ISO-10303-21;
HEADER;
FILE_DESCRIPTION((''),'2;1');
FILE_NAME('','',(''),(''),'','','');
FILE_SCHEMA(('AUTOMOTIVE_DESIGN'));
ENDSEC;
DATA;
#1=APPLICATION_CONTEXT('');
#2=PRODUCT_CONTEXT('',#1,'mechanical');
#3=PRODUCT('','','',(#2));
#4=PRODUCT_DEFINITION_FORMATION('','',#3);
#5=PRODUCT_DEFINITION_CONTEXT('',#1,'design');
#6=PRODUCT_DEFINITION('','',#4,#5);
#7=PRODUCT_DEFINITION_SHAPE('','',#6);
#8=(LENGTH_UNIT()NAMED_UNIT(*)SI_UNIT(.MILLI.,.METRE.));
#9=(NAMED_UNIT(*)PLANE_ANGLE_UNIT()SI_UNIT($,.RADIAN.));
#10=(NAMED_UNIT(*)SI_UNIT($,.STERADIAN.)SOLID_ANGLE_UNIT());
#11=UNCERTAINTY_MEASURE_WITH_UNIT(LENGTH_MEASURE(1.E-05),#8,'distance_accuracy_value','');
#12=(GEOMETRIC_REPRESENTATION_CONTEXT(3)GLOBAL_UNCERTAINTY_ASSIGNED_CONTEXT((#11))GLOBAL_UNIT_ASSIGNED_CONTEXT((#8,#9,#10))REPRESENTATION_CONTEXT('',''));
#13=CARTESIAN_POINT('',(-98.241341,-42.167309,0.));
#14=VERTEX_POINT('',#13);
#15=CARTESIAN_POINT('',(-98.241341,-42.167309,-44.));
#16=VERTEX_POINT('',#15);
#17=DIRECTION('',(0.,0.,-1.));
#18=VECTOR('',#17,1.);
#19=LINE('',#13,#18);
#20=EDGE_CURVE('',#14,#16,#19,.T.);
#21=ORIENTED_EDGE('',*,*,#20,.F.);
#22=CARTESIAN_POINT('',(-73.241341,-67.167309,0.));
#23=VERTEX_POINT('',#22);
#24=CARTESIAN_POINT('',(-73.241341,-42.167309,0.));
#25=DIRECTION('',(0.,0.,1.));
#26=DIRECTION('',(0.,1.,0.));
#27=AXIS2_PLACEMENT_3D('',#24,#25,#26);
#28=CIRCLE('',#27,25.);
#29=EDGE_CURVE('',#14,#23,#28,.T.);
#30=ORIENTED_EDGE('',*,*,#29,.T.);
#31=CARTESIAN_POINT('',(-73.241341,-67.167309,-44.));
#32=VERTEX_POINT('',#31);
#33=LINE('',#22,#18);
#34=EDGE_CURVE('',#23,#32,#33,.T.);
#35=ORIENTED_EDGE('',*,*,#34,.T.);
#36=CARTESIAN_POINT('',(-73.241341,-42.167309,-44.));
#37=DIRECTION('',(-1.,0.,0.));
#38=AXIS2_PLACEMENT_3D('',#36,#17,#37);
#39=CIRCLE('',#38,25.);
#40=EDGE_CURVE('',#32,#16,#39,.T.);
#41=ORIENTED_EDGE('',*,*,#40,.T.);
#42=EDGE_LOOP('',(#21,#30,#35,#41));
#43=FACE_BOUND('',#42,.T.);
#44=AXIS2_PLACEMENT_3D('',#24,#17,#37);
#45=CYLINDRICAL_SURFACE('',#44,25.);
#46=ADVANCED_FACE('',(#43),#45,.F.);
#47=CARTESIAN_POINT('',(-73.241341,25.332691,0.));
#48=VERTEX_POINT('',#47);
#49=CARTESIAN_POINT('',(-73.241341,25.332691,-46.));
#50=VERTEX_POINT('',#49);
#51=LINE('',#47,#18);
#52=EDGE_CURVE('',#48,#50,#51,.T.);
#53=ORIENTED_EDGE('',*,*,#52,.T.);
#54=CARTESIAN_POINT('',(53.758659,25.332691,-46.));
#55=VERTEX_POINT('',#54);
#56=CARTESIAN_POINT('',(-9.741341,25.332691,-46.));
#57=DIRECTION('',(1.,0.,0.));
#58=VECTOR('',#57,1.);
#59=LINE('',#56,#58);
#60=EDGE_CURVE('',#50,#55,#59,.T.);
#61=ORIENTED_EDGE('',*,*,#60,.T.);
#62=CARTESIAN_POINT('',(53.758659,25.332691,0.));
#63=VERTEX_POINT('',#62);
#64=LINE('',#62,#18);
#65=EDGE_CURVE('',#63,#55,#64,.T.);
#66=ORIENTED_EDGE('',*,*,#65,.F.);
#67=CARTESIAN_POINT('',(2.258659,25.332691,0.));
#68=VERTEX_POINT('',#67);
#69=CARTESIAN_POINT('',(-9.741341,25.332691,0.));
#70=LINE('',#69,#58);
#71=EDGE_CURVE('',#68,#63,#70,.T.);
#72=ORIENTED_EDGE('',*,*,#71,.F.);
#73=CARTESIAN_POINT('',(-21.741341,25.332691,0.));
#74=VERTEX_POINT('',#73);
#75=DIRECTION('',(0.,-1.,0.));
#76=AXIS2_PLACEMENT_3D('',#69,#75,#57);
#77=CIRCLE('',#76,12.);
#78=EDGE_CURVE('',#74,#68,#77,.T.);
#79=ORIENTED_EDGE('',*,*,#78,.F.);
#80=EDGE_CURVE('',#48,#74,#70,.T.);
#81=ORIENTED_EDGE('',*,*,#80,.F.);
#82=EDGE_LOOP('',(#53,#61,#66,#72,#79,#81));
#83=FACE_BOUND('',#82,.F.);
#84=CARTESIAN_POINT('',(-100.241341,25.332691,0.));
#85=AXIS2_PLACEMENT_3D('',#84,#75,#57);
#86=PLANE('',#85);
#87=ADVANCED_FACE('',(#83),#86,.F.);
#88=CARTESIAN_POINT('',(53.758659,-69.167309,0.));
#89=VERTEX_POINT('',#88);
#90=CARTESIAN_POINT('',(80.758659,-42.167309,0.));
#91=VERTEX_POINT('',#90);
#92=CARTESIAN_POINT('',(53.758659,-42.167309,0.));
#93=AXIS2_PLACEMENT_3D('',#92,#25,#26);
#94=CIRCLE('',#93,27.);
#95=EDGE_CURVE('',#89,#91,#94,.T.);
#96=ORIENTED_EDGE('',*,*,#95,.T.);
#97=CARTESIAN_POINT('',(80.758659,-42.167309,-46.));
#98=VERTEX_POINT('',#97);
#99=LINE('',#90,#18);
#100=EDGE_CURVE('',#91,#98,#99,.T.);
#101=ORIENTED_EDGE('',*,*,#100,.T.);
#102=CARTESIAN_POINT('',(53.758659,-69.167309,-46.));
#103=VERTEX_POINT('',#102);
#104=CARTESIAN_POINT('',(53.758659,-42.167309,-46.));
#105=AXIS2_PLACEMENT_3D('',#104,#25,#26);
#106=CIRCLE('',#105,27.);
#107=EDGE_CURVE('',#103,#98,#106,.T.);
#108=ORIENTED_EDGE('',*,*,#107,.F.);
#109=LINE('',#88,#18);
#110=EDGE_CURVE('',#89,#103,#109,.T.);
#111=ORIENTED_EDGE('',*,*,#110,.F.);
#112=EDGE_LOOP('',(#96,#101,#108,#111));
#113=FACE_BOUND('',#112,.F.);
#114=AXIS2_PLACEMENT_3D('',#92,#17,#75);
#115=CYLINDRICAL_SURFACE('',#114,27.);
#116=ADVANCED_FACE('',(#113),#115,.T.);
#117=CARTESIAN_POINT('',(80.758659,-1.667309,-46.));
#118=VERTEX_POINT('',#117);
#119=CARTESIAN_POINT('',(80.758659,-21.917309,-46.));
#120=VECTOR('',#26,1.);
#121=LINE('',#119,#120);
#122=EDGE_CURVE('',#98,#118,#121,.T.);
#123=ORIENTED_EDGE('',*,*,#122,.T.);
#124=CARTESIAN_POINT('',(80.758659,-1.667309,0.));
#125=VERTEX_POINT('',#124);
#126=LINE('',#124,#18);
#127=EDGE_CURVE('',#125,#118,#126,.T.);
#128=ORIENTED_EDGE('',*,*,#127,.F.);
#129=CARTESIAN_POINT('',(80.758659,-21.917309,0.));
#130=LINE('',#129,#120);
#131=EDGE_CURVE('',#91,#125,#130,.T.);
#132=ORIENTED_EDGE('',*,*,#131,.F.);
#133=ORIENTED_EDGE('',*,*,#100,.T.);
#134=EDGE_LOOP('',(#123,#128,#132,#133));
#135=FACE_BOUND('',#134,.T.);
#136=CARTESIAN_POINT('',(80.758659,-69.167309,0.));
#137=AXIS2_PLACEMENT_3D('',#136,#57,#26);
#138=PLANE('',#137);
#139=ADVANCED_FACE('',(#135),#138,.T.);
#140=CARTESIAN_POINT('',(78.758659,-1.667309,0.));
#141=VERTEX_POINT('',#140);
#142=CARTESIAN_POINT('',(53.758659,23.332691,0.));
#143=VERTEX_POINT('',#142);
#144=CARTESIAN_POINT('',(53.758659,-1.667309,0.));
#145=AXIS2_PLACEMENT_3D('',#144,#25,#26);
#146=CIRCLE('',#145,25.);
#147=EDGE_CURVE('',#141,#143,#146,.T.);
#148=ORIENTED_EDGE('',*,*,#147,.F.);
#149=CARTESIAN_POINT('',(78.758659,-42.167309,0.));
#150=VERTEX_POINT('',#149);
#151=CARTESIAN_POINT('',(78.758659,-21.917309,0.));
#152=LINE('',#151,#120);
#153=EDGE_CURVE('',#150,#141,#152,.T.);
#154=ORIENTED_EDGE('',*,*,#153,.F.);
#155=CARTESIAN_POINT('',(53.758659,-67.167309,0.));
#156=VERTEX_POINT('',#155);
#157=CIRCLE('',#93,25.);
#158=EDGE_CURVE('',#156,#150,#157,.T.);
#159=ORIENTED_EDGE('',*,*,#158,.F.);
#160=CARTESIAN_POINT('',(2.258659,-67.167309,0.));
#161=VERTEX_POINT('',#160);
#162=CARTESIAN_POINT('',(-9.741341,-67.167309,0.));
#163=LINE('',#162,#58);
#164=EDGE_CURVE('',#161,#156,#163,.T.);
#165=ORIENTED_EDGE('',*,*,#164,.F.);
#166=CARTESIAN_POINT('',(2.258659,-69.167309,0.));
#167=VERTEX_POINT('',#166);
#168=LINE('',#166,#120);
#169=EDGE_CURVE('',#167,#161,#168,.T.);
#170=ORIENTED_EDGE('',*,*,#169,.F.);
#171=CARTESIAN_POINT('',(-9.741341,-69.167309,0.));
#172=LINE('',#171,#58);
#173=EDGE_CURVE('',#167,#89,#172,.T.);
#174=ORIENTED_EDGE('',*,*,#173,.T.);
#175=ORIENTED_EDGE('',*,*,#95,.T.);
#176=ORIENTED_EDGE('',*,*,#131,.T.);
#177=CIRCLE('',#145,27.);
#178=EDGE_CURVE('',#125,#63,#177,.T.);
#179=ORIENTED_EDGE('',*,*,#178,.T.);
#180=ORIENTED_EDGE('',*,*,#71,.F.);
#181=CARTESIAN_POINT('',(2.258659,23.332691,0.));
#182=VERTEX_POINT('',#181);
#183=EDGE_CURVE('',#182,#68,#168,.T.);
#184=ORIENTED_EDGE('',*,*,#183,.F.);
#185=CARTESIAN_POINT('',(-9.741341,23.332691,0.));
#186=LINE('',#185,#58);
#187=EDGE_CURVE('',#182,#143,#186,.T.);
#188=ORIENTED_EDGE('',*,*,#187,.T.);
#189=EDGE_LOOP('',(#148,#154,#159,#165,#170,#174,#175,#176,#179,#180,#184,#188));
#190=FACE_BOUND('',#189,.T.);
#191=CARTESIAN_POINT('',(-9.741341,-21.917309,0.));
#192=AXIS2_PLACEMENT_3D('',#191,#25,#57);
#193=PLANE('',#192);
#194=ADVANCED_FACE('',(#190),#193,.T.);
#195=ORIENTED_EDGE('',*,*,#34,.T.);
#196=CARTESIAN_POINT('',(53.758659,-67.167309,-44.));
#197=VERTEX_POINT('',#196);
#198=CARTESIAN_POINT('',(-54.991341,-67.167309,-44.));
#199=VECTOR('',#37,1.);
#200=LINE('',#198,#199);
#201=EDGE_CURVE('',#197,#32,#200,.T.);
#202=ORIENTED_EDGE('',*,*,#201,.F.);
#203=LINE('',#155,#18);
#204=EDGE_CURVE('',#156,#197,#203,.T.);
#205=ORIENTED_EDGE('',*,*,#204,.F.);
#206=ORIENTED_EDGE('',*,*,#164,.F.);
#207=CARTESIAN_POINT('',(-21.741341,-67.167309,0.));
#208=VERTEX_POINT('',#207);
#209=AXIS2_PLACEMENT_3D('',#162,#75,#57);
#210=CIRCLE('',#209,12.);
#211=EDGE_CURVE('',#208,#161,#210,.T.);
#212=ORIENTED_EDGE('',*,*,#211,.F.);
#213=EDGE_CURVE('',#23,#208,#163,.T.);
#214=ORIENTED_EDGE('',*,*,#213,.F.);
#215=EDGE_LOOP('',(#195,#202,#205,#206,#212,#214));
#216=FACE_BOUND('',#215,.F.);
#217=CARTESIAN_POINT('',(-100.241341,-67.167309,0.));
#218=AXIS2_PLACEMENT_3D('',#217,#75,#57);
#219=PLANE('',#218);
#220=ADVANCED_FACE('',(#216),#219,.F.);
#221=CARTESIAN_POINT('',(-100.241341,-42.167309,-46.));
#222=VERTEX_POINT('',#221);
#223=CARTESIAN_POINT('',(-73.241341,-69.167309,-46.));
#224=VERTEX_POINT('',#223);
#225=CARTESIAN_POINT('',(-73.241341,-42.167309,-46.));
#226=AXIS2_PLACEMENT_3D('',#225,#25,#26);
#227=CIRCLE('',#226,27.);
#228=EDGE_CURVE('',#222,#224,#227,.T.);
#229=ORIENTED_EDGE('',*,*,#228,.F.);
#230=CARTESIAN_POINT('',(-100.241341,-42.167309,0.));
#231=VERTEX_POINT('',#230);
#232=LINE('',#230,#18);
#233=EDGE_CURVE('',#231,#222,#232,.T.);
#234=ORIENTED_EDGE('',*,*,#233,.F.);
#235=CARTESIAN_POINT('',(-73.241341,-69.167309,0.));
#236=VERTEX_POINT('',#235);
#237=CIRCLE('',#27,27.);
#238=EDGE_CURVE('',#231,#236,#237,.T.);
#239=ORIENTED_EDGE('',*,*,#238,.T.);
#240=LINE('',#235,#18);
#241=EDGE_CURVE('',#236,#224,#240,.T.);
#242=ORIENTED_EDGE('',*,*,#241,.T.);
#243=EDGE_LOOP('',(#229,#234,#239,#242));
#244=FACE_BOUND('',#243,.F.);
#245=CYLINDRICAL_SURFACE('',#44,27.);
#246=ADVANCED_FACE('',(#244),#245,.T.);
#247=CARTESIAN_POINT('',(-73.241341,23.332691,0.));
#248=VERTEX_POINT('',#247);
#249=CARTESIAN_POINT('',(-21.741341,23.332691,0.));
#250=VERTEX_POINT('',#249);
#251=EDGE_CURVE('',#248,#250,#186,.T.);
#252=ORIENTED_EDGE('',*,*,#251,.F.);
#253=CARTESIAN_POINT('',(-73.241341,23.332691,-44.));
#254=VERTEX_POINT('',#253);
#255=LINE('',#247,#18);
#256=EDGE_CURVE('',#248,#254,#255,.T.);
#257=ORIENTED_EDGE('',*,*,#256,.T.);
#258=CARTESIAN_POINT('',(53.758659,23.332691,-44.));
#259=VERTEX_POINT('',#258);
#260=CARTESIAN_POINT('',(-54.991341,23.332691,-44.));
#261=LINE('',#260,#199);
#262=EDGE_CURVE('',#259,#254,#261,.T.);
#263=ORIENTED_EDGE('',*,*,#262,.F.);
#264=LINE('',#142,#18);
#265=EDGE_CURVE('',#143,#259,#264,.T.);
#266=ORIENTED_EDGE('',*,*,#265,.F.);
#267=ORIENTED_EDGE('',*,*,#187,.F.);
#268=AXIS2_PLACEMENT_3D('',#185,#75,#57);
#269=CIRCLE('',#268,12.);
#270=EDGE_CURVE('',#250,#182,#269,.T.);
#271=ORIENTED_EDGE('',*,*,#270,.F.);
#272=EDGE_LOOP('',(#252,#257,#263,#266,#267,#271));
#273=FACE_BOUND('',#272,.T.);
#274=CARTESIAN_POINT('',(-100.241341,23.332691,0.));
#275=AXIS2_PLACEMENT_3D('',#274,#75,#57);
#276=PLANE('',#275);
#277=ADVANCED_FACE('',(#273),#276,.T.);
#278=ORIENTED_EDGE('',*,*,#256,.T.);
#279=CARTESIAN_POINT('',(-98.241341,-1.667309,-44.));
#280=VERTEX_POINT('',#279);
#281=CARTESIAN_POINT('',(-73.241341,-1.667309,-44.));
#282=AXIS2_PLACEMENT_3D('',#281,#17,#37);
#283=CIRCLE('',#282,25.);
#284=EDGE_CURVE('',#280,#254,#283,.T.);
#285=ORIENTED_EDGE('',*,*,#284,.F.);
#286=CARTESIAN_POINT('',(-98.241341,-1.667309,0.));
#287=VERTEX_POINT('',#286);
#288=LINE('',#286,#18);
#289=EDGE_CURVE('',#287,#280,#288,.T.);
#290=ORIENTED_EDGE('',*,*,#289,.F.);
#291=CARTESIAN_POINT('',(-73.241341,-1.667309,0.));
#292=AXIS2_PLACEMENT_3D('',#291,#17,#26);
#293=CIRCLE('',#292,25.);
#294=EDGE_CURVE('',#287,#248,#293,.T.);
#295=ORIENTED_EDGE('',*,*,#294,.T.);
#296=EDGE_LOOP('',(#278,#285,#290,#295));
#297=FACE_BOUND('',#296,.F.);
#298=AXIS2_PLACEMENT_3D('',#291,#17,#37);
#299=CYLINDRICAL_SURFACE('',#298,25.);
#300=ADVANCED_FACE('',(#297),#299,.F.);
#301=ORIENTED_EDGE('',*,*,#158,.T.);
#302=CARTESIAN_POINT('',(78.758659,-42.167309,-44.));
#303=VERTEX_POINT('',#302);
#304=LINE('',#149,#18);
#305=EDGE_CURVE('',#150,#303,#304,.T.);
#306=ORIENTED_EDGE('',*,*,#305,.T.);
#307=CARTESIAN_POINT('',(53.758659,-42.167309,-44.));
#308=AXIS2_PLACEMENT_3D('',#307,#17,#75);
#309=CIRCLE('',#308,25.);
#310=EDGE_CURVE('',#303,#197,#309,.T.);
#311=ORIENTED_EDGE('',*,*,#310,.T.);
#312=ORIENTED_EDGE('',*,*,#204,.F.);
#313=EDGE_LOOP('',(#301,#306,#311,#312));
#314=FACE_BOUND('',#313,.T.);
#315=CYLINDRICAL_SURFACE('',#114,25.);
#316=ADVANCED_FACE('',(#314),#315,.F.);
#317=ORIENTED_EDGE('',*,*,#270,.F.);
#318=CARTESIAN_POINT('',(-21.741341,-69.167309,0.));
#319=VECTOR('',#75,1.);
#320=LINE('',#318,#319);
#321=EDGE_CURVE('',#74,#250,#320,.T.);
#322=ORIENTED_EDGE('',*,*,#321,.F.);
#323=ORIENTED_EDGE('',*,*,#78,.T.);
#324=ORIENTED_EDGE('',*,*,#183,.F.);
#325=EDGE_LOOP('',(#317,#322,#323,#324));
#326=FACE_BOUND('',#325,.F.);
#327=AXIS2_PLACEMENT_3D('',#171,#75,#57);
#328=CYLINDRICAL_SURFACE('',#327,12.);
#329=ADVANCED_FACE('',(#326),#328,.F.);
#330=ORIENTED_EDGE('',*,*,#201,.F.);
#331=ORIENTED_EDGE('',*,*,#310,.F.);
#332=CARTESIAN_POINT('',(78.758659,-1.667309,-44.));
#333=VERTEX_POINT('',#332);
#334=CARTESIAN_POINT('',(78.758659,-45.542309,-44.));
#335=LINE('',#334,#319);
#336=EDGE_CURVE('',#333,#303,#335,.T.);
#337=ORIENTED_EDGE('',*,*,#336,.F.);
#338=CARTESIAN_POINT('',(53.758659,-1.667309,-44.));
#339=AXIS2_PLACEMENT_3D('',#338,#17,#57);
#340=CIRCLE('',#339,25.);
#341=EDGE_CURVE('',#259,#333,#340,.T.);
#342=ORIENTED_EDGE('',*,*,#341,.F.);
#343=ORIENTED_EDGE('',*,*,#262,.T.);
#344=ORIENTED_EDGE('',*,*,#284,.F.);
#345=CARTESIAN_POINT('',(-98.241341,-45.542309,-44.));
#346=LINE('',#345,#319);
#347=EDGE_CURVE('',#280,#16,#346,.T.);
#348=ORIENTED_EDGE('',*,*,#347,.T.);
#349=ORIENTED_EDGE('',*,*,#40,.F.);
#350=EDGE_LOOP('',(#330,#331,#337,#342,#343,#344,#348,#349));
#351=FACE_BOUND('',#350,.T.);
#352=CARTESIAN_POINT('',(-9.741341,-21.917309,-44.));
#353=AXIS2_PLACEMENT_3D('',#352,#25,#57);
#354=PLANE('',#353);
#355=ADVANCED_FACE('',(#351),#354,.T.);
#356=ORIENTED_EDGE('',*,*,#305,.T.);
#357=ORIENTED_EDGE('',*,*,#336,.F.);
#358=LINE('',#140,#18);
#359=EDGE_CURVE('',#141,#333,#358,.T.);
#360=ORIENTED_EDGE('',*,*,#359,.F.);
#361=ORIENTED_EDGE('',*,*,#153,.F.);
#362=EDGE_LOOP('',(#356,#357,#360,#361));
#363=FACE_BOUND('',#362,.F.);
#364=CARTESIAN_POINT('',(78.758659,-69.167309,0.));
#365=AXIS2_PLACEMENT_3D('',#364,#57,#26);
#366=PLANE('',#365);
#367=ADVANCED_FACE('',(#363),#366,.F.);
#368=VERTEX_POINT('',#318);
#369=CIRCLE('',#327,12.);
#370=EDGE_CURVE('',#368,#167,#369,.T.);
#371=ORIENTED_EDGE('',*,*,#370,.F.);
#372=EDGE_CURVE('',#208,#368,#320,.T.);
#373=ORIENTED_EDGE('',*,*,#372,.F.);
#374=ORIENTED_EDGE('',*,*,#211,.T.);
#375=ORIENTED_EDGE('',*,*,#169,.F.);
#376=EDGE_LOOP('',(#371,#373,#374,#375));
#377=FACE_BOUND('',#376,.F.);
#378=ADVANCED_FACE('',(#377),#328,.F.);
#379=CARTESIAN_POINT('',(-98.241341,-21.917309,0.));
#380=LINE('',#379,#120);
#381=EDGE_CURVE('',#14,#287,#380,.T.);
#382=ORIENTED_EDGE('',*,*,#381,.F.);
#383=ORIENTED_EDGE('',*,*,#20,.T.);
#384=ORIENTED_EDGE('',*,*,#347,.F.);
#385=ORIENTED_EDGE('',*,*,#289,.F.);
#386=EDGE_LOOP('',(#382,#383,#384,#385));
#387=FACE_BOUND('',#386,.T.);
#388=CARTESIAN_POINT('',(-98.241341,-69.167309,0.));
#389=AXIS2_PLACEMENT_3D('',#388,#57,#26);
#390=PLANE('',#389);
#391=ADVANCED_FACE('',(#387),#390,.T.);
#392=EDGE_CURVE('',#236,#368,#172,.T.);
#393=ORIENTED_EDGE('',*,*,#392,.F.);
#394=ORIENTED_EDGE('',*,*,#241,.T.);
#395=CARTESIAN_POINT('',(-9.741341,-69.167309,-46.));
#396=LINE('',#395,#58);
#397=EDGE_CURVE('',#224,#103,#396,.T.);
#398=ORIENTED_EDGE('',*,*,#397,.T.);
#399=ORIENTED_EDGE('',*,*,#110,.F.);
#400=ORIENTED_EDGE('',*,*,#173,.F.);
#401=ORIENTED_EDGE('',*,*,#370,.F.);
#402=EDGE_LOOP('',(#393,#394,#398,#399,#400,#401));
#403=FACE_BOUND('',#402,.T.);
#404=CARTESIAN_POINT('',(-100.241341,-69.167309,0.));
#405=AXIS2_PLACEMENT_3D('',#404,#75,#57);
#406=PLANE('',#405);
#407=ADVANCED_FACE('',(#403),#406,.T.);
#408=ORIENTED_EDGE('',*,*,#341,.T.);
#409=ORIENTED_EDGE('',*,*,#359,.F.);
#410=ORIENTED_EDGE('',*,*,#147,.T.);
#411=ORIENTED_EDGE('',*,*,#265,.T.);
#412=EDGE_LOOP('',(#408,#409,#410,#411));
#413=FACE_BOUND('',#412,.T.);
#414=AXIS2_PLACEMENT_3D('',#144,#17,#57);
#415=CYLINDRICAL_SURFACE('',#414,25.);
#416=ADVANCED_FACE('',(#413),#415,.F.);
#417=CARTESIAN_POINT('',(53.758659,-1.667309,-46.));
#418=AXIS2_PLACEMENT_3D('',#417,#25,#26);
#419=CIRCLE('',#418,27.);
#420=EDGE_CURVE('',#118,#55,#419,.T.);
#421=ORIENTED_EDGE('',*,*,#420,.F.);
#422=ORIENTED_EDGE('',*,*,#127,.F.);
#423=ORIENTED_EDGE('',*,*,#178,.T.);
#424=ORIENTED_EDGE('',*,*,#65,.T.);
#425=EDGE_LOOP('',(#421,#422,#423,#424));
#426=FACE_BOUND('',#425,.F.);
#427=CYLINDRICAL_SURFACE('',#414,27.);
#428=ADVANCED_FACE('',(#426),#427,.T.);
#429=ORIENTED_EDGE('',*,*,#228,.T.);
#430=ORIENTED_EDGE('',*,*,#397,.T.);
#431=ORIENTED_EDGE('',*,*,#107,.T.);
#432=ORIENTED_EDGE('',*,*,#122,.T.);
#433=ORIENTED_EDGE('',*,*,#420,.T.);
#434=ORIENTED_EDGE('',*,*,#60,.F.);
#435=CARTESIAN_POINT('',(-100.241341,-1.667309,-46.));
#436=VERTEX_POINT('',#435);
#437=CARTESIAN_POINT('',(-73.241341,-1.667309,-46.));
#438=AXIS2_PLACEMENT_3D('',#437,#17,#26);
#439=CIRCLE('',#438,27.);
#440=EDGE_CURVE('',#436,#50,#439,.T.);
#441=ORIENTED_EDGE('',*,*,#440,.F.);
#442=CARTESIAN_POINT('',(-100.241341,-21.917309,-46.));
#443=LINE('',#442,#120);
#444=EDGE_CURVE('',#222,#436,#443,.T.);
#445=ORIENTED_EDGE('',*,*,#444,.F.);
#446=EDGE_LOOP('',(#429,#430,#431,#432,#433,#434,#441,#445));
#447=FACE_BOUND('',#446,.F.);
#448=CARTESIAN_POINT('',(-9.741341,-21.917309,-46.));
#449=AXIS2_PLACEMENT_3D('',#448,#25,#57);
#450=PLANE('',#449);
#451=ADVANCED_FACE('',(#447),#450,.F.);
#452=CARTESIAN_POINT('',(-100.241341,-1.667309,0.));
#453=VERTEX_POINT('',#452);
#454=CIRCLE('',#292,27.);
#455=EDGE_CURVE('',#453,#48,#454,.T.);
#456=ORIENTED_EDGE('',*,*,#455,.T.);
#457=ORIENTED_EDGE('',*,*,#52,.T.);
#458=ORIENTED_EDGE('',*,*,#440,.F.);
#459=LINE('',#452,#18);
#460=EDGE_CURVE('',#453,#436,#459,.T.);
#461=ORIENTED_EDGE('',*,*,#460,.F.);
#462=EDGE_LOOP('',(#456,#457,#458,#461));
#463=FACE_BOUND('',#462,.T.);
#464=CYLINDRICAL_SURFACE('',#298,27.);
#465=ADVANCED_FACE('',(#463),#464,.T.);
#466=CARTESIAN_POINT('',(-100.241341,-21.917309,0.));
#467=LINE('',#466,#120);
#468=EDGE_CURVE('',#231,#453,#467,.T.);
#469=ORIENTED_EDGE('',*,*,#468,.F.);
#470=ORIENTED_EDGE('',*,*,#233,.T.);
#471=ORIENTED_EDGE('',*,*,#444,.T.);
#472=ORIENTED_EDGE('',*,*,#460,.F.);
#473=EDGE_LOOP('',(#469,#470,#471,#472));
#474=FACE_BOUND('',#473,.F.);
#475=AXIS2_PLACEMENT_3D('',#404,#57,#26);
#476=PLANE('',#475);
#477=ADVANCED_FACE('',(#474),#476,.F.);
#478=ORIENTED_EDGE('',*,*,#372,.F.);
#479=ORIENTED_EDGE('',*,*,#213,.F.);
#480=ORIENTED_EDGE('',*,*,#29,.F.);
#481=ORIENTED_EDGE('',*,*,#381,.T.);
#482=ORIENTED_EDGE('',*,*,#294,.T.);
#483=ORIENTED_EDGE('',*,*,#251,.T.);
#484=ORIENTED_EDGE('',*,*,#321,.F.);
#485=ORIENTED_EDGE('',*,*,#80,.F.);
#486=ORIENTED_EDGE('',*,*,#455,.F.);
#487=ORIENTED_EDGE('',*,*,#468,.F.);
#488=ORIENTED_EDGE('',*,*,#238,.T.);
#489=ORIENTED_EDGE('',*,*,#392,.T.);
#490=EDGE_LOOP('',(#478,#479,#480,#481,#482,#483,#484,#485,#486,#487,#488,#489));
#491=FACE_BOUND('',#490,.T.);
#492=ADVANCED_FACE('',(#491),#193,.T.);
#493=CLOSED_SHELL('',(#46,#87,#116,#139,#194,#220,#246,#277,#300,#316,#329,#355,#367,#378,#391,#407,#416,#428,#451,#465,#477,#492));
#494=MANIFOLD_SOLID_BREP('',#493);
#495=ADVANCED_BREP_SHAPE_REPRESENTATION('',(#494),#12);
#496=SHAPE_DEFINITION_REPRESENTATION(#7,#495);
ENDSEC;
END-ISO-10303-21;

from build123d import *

# Parameters (mm, degrees)
F0_W     = 181
F0_H     = 94.5
F1_DEPTH = 46
F2_R     = 27
F3_T     = -2
F4_R     = 12
F5_DEPTH = 105


with BuildPart() as f1:
    # F0 (on Top) → F1 (new body)
    with BuildSketch(Plane.XY):
        with Locations((-9.7413412556, -21.9173085093)):
            Rectangle(F0_W, F0_H)
    extrude(amount=-F1_DEPTH)

    # F2
    f2_edges = [f1.edges().sort_by_distance(p)[0] for p in [
        (80.758659, 25.332691, -23),
        (-100.241341, 25.332691, -23),
        (-100.241341, -69.167309, -23),
        (80.758659, -69.167309, -23),
    ]]
    fillet(f2_edges, radius=F2_R)

    # F3
    f3_openings = [f1.faces().sort_by_distance(p)[0] for p in [
        (-9.741341, -21.917309, 0),
    ]]
    offset(amount=F3_T, openings=f3_openings)

    # F4 (on face) → F5 (cut)
    with BuildSketch(Plane.XZ.offset(69.1673085093)):
        with Locations((-9.7413412556, 0)):
            Circle(F4_R)
    extrude(amount=-F5_DEPTH, mode=Mode.SUBTRACT)


solid = f1.part
